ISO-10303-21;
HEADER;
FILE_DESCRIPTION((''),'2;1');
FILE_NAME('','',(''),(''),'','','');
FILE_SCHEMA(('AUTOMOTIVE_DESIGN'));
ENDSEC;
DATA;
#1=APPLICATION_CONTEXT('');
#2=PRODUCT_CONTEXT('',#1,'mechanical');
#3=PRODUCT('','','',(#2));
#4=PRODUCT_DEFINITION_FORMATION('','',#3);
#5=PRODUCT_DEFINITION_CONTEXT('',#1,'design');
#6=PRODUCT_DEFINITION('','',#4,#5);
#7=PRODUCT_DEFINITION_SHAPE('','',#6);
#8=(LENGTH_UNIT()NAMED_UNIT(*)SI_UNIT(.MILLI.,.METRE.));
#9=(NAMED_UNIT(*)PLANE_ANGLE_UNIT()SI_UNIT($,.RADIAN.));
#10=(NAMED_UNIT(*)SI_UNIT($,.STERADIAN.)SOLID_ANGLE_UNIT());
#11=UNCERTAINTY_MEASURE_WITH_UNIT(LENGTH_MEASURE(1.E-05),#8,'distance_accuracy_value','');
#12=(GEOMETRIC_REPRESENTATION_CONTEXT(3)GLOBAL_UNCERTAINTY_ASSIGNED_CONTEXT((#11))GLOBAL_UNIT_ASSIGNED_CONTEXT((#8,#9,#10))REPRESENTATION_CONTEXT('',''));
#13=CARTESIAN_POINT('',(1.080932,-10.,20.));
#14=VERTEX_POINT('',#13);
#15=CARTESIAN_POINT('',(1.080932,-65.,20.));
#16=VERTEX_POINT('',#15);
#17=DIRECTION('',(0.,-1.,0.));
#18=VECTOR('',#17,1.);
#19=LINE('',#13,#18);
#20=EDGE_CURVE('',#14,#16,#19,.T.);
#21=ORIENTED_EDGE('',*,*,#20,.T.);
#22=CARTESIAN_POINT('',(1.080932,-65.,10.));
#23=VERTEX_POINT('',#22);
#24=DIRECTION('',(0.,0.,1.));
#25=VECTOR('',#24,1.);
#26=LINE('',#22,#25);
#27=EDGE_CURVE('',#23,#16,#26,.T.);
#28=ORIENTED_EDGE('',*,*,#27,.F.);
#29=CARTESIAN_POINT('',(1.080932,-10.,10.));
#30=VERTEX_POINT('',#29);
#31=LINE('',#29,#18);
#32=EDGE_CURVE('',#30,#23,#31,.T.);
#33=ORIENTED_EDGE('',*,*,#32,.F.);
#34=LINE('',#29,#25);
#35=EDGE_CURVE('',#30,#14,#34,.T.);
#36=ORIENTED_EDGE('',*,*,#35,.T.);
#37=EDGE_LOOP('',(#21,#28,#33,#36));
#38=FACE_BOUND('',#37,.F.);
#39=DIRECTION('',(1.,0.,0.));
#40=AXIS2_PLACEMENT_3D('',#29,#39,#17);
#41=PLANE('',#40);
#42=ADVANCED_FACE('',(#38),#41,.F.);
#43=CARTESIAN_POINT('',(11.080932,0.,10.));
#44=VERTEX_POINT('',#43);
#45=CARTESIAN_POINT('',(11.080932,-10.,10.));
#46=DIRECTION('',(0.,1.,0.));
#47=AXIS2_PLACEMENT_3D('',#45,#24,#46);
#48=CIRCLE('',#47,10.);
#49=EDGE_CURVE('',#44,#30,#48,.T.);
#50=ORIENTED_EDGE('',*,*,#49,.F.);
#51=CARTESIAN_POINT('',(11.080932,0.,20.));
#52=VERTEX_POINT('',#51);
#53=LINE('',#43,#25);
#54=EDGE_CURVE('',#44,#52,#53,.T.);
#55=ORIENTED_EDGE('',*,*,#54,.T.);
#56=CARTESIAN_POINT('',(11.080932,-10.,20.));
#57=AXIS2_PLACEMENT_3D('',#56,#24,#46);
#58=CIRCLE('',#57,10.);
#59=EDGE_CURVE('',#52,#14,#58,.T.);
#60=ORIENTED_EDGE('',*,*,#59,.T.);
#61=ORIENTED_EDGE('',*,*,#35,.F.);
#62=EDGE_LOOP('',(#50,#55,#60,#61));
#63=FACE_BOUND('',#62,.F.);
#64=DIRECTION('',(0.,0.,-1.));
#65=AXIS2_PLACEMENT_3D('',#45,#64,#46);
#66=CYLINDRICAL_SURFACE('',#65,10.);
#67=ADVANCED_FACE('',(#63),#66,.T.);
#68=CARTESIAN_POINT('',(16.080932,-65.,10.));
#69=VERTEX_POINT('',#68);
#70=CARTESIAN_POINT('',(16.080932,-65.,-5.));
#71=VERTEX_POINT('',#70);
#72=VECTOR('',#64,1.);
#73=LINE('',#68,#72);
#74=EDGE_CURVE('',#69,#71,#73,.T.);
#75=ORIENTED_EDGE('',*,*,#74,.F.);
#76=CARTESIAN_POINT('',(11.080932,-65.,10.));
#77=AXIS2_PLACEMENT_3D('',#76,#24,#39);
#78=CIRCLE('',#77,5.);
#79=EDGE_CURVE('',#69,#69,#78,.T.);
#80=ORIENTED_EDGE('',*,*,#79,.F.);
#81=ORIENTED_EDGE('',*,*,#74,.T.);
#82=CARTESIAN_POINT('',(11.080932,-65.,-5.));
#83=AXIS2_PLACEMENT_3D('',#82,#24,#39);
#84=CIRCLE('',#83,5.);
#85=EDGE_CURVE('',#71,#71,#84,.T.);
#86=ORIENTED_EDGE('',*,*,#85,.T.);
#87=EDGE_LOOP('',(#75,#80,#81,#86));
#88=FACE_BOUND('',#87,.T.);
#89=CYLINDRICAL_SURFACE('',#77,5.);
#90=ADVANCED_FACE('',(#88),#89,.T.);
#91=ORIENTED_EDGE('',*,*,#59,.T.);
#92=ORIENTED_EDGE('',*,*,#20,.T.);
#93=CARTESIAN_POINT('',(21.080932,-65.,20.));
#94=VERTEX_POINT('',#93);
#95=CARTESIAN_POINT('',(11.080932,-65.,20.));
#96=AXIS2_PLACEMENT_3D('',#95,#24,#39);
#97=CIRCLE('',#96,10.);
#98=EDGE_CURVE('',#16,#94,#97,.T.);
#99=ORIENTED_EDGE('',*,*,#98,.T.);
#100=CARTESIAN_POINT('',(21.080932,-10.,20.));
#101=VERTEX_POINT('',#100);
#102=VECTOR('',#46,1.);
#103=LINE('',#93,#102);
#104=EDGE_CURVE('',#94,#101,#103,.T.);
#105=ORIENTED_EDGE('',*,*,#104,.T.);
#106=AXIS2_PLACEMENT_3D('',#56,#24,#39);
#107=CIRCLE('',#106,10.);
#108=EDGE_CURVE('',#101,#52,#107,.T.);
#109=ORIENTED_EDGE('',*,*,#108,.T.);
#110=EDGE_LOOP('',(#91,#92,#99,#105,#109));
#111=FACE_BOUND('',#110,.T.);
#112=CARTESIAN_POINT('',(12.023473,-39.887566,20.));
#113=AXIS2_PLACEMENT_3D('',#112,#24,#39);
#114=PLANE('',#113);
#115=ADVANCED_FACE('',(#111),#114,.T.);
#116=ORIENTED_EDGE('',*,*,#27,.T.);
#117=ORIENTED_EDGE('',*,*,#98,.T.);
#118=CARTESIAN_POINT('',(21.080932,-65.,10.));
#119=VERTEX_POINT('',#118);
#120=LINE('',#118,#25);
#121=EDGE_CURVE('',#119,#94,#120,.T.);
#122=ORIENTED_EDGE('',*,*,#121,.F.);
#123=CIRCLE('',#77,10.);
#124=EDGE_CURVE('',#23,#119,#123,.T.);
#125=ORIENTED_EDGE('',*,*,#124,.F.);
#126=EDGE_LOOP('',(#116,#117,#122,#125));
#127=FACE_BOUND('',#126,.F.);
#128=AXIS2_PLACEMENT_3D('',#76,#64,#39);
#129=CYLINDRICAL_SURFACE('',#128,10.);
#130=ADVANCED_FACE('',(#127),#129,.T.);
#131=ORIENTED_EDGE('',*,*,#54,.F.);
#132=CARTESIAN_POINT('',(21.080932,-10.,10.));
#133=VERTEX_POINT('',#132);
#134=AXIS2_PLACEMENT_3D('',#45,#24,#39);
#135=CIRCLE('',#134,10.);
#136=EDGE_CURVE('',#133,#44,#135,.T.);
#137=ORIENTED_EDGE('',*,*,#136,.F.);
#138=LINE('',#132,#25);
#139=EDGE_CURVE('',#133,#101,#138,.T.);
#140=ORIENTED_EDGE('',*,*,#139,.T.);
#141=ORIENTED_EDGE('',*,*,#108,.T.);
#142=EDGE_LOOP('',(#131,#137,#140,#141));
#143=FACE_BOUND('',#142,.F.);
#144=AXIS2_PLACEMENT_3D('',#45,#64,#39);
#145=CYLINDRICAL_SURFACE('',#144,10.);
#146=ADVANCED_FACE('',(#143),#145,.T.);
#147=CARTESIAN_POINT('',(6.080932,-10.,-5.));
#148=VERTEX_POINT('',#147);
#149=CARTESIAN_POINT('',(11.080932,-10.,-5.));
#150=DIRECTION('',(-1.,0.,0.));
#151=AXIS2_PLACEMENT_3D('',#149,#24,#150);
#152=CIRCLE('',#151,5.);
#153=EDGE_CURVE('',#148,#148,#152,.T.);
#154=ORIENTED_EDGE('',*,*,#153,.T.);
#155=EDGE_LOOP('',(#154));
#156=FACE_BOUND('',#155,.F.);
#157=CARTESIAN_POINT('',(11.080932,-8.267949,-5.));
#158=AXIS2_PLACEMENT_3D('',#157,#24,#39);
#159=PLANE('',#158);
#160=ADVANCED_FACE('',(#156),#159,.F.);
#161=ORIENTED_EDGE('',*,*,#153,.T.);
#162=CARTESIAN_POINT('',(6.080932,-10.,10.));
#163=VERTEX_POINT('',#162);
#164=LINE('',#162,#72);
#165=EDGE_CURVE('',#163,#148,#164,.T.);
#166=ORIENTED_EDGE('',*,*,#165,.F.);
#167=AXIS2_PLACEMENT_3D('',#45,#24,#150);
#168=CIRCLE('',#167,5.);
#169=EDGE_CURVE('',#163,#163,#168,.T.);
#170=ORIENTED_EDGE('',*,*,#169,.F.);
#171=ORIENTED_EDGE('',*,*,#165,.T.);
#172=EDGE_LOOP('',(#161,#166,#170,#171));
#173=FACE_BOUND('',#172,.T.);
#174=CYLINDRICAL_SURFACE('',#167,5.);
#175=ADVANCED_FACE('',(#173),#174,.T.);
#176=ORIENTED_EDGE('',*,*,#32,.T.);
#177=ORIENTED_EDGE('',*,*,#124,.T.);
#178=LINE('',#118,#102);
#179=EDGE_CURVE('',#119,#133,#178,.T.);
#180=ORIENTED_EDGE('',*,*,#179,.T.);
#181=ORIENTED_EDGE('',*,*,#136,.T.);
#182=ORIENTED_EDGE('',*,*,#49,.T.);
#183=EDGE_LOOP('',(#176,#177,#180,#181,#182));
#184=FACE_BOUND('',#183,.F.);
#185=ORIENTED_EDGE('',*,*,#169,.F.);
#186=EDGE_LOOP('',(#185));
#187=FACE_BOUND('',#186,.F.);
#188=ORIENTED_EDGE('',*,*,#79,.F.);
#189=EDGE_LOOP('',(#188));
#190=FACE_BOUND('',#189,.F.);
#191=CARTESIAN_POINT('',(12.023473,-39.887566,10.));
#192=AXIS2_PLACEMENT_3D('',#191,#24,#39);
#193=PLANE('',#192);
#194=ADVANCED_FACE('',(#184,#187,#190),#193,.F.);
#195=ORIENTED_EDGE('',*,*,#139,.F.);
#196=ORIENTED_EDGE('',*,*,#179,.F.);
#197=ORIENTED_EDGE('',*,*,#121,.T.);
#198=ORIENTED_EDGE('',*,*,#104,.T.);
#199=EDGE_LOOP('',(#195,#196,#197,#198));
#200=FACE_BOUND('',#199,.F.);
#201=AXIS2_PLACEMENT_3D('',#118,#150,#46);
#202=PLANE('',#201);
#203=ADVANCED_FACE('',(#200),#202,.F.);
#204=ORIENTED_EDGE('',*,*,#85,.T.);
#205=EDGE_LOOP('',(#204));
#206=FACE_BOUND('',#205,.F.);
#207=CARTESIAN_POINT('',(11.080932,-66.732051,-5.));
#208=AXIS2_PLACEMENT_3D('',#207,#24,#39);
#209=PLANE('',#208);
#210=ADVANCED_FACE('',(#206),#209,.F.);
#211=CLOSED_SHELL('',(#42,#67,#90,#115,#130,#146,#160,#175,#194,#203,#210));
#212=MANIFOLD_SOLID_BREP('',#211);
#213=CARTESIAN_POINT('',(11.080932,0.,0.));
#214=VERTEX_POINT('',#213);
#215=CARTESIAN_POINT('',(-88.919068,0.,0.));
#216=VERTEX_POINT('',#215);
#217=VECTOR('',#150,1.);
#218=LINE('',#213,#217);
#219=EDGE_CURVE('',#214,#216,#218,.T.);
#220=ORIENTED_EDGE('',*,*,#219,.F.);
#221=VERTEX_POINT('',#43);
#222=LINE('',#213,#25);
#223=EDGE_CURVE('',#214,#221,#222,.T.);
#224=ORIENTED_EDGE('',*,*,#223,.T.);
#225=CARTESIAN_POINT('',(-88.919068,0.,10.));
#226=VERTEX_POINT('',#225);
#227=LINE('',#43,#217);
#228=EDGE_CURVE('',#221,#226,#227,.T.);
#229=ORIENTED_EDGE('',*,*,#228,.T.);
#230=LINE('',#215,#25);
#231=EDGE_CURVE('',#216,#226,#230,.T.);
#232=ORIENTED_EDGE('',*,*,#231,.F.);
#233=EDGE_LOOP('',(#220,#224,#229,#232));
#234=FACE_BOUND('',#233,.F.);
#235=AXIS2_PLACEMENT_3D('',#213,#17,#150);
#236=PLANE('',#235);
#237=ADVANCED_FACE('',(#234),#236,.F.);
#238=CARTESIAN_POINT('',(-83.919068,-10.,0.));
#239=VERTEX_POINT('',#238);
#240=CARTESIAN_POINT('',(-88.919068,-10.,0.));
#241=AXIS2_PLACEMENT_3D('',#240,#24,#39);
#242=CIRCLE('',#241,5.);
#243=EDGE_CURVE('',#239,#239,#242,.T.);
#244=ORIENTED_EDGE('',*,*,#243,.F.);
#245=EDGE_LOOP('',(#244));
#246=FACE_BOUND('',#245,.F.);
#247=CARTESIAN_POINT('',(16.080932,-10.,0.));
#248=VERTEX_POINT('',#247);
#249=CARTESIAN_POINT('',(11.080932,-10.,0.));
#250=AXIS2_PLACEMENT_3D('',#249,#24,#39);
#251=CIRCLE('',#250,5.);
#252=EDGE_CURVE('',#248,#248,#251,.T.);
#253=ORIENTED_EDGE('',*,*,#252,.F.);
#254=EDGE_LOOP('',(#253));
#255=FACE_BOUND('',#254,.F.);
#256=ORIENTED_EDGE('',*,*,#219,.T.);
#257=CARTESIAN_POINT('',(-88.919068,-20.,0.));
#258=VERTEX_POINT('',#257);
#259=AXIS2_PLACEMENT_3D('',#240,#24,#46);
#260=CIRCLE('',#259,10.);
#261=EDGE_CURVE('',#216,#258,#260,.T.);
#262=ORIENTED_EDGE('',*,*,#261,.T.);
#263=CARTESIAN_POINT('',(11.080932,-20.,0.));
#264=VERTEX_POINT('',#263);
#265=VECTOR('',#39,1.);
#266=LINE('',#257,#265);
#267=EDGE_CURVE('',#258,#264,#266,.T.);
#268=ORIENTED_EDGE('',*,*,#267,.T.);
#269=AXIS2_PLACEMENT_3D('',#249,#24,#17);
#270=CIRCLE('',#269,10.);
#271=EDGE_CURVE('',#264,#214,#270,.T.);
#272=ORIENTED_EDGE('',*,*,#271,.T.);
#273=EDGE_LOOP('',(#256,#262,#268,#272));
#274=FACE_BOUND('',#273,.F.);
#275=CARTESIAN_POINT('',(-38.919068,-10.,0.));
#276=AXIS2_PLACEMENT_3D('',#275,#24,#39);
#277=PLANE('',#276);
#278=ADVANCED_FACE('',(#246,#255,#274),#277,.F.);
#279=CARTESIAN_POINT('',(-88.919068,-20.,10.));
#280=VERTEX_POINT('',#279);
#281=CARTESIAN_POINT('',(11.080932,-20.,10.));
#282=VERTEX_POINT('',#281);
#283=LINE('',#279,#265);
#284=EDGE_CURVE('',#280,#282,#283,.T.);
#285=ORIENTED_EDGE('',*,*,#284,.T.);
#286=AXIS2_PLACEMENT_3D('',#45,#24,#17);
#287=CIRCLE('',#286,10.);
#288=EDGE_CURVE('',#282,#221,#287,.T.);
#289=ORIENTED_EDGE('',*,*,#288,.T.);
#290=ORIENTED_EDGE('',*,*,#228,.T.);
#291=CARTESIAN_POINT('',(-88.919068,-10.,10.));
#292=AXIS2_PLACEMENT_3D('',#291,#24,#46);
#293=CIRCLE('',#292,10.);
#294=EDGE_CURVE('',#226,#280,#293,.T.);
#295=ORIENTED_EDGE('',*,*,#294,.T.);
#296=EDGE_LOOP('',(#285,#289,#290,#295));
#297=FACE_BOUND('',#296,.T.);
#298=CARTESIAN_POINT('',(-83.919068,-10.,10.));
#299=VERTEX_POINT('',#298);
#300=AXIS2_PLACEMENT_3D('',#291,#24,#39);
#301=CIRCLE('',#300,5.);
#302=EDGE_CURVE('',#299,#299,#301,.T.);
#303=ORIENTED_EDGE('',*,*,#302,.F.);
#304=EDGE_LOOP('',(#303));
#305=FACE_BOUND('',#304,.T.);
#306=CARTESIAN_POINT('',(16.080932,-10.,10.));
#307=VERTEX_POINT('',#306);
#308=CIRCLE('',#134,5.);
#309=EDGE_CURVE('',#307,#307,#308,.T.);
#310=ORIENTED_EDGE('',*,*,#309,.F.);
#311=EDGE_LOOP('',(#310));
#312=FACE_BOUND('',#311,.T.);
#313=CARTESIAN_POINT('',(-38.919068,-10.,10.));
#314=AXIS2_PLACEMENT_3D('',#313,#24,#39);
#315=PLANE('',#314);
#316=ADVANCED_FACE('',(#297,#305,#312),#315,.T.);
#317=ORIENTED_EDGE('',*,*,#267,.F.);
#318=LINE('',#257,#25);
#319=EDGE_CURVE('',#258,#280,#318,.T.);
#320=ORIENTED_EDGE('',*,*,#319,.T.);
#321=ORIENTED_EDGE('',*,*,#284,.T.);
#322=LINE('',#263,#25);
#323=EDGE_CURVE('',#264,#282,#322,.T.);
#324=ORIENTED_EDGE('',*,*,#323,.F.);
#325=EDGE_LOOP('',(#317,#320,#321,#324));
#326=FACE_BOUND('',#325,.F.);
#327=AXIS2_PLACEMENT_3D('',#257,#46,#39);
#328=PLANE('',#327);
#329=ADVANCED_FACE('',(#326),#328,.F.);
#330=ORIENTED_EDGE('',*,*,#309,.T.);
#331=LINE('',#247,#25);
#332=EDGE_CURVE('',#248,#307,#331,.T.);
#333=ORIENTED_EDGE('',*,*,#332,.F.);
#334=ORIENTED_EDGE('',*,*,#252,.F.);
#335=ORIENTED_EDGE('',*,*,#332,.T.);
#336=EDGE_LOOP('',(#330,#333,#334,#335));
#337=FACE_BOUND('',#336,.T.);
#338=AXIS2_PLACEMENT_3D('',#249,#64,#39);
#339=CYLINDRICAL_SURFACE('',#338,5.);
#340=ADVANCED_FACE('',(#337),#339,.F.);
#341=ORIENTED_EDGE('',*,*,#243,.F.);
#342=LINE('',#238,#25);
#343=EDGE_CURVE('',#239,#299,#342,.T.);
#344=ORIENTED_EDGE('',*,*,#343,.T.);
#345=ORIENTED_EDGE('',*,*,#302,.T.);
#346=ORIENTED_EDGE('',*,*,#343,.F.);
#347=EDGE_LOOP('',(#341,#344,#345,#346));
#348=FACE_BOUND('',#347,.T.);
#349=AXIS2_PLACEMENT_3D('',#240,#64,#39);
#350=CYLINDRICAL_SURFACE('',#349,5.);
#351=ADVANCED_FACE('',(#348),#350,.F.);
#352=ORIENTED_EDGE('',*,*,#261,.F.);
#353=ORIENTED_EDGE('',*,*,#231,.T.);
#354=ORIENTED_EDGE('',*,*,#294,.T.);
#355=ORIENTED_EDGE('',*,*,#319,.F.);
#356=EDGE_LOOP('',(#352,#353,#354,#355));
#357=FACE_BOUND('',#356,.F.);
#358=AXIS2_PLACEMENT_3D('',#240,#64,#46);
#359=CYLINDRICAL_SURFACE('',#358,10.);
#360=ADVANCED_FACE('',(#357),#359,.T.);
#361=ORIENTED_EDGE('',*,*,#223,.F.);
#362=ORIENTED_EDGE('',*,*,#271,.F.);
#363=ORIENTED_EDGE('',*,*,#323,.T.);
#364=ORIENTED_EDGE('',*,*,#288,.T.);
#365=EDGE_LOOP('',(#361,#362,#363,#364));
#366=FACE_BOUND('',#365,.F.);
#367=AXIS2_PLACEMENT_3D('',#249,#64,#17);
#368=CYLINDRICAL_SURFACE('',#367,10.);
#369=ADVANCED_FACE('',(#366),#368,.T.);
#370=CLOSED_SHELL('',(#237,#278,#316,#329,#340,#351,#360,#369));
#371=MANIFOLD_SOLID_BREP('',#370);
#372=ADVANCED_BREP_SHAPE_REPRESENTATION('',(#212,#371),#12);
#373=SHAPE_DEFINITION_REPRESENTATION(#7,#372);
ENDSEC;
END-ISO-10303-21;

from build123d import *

# Parameters (mm, degrees)
F0_R     = 5
F1_DEPTH = 10
F3_DEPTH = 10
F4_DEPTH = 15
F5_DEPTH = 15


with BuildPart() as f1:
    # F0 (on Top) → F1 (new body)
    with BuildSketch(Plane.XY):
        with BuildLine():
            Line((11.080931966, 0), (-88.919068034, 0))
            ThreePointArc((-88.919068034, 0), (-98.919068034, -10), (-88.919068034, -20))
            Line((-88.919068034, -20), (11.080931966, -20))
            ThreePointArc((11.080931966, -20), (21.080931966, -10), (11.080931966, 0))
        make_face()
        with Locations((-88.919068034, -10)):
            Circle(F0_R, mode=Mode.SUBTRACT)
        with Locations((11.080931966, -10)):
            Circle(F0_R, mode=Mode.SUBTRACT)
    extrude(amount=F1_DEPTH)


with BuildPart() as f3:
    # F2 (on face) → F3 (new body)
    with BuildSketch(Plane.XY.offset(10)):
        with BuildLine():
            Line((21.080931966, -65), (21.080931966, -10))
            ThreePointArc((21.080931966, -10), (18.1519997779, -17.0710678119), (11.080931966, -20))
            Line((11.080931966, -20), (1.080931966, -20))
            Line((1.080931966, -20), (1.080931966, -65))
            ThreePointArc((1.080931966, -65), (11.080931966, -55), (21.080931966, -65))
        make_face()
        with BuildLine():
            ThreePointArc((11.080931966, -20), (18.1519997779, -17.0710678119), (21.080931966, -10))
            Line((21.080931966, -10), (16.080931966, -10))
            ThreePointArc((16.080931966, -10), (11.080931966, -15), (6.080931966, -10))
            Line((6.080931966, -10), (1.080931966, -10))
            ThreePointArc((1.080931966, -10), (4.0098641541, -17.0710678119), (11.080931966, -20))
        make_face()
        with BuildLine():
            Line((1.080931966, -20), (11.080931966, -20))
            ThreePointArc((11.080931966, -20), (4.0098641541, -17.0710678119), (1.080931966, -10))
            Line((1.080931966, -10), (1.080931966, -20))
        make_face()
        with BuildLine():
            Line((16.080931966, -10), (21.080931966, -10))
            ThreePointArc((21.080931966, -10), (18.1519997779, -2.9289321881), (11.080931966, 0))
            ThreePointArc((11.080931966, 0), (4.0098641541, -2.9289321881), (1.080931966, -10))
            Line((1.080931966, -10), (6.080931966, -10))
            ThreePointArc((6.080931966, -10), (11.080931966, -5), (16.080931966, -10))
        make_face()
        with BuildLine():
            ThreePointArc((1.080931966, -65), (11.080931966, -75), (21.080931966, -65))
            ThreePointArc((21.080931966, -65), (11.080931966, -55), (1.080931966, -65))
        make_face()
        with BuildLine():
            ThreePointArc((16.080931966, -65), (11.080931966, -70), (6.080931966, -65))
            ThreePointArc((6.080931966, -65), (11.080931966, -60), (16.080931966, -65))
        make_face(mode=Mode.SUBTRACT)
        with BuildLine():
            ThreePointArc((6.080931966, -10), (11.080931966, -15), (16.080931966, -10))
            Line((16.080931966, -10), (6.080931966, -10))
        make_face()
        with BuildLine():
            Line((6.080931966, -10), (16.080931966, -10))
            ThreePointArc((16.080931966, -10), (11.080931966, -5), (6.080931966, -10))
        make_face()
        with BuildLine():
            ThreePointArc((16.080931966, -65), (11.080931966, -60), (6.080931966, -65))
            Line((6.080931966, -65), (16.080931966, -65))
        make_face()
        with BuildLine():
            Line((16.080931966, -65), (6.080931966, -65))
            ThreePointArc((6.080931966, -65), (11.080931966, -70), (16.080931966, -65))
        make_face()
    extrude(amount=F3_DEPTH)

    # F2 (on face) → F4 (join)
    with BuildSketch(Plane.XY.offset(10)):
        with BuildLine():
            Line((6.080931966, -10), (16.080931966, -10))
            ThreePointArc((16.080931966, -10), (11.080931966, -5), (6.080931966, -10))
        make_face()
        with BuildLine():
            ThreePointArc((6.080931966, -10), (11.080931966, -15), (16.080931966, -10))
            Line((16.080931966, -10), (6.080931966, -10))
        make_face()
    extrude(amount=-F4_DEPTH)

    # F2 (on face) → F5 (join)
    with BuildSketch(Plane.XY.offset(10)):
        with BuildLine():
            Line((16.080931966, -65), (6.080931966, -65))
            ThreePointArc((6.080931966, -65), (11.080931966, -70), (16.080931966, -65))
        make_face()
        with BuildLine():
            ThreePointArc((16.080931966, -65), (11.080931966, -60), (6.080931966, -65))
            Line((6.080931966, -65), (16.080931966, -65))
        make_face()
    extrude(amount=-F5_DEPTH)


solid = Compound([f1.part, f3.part])
